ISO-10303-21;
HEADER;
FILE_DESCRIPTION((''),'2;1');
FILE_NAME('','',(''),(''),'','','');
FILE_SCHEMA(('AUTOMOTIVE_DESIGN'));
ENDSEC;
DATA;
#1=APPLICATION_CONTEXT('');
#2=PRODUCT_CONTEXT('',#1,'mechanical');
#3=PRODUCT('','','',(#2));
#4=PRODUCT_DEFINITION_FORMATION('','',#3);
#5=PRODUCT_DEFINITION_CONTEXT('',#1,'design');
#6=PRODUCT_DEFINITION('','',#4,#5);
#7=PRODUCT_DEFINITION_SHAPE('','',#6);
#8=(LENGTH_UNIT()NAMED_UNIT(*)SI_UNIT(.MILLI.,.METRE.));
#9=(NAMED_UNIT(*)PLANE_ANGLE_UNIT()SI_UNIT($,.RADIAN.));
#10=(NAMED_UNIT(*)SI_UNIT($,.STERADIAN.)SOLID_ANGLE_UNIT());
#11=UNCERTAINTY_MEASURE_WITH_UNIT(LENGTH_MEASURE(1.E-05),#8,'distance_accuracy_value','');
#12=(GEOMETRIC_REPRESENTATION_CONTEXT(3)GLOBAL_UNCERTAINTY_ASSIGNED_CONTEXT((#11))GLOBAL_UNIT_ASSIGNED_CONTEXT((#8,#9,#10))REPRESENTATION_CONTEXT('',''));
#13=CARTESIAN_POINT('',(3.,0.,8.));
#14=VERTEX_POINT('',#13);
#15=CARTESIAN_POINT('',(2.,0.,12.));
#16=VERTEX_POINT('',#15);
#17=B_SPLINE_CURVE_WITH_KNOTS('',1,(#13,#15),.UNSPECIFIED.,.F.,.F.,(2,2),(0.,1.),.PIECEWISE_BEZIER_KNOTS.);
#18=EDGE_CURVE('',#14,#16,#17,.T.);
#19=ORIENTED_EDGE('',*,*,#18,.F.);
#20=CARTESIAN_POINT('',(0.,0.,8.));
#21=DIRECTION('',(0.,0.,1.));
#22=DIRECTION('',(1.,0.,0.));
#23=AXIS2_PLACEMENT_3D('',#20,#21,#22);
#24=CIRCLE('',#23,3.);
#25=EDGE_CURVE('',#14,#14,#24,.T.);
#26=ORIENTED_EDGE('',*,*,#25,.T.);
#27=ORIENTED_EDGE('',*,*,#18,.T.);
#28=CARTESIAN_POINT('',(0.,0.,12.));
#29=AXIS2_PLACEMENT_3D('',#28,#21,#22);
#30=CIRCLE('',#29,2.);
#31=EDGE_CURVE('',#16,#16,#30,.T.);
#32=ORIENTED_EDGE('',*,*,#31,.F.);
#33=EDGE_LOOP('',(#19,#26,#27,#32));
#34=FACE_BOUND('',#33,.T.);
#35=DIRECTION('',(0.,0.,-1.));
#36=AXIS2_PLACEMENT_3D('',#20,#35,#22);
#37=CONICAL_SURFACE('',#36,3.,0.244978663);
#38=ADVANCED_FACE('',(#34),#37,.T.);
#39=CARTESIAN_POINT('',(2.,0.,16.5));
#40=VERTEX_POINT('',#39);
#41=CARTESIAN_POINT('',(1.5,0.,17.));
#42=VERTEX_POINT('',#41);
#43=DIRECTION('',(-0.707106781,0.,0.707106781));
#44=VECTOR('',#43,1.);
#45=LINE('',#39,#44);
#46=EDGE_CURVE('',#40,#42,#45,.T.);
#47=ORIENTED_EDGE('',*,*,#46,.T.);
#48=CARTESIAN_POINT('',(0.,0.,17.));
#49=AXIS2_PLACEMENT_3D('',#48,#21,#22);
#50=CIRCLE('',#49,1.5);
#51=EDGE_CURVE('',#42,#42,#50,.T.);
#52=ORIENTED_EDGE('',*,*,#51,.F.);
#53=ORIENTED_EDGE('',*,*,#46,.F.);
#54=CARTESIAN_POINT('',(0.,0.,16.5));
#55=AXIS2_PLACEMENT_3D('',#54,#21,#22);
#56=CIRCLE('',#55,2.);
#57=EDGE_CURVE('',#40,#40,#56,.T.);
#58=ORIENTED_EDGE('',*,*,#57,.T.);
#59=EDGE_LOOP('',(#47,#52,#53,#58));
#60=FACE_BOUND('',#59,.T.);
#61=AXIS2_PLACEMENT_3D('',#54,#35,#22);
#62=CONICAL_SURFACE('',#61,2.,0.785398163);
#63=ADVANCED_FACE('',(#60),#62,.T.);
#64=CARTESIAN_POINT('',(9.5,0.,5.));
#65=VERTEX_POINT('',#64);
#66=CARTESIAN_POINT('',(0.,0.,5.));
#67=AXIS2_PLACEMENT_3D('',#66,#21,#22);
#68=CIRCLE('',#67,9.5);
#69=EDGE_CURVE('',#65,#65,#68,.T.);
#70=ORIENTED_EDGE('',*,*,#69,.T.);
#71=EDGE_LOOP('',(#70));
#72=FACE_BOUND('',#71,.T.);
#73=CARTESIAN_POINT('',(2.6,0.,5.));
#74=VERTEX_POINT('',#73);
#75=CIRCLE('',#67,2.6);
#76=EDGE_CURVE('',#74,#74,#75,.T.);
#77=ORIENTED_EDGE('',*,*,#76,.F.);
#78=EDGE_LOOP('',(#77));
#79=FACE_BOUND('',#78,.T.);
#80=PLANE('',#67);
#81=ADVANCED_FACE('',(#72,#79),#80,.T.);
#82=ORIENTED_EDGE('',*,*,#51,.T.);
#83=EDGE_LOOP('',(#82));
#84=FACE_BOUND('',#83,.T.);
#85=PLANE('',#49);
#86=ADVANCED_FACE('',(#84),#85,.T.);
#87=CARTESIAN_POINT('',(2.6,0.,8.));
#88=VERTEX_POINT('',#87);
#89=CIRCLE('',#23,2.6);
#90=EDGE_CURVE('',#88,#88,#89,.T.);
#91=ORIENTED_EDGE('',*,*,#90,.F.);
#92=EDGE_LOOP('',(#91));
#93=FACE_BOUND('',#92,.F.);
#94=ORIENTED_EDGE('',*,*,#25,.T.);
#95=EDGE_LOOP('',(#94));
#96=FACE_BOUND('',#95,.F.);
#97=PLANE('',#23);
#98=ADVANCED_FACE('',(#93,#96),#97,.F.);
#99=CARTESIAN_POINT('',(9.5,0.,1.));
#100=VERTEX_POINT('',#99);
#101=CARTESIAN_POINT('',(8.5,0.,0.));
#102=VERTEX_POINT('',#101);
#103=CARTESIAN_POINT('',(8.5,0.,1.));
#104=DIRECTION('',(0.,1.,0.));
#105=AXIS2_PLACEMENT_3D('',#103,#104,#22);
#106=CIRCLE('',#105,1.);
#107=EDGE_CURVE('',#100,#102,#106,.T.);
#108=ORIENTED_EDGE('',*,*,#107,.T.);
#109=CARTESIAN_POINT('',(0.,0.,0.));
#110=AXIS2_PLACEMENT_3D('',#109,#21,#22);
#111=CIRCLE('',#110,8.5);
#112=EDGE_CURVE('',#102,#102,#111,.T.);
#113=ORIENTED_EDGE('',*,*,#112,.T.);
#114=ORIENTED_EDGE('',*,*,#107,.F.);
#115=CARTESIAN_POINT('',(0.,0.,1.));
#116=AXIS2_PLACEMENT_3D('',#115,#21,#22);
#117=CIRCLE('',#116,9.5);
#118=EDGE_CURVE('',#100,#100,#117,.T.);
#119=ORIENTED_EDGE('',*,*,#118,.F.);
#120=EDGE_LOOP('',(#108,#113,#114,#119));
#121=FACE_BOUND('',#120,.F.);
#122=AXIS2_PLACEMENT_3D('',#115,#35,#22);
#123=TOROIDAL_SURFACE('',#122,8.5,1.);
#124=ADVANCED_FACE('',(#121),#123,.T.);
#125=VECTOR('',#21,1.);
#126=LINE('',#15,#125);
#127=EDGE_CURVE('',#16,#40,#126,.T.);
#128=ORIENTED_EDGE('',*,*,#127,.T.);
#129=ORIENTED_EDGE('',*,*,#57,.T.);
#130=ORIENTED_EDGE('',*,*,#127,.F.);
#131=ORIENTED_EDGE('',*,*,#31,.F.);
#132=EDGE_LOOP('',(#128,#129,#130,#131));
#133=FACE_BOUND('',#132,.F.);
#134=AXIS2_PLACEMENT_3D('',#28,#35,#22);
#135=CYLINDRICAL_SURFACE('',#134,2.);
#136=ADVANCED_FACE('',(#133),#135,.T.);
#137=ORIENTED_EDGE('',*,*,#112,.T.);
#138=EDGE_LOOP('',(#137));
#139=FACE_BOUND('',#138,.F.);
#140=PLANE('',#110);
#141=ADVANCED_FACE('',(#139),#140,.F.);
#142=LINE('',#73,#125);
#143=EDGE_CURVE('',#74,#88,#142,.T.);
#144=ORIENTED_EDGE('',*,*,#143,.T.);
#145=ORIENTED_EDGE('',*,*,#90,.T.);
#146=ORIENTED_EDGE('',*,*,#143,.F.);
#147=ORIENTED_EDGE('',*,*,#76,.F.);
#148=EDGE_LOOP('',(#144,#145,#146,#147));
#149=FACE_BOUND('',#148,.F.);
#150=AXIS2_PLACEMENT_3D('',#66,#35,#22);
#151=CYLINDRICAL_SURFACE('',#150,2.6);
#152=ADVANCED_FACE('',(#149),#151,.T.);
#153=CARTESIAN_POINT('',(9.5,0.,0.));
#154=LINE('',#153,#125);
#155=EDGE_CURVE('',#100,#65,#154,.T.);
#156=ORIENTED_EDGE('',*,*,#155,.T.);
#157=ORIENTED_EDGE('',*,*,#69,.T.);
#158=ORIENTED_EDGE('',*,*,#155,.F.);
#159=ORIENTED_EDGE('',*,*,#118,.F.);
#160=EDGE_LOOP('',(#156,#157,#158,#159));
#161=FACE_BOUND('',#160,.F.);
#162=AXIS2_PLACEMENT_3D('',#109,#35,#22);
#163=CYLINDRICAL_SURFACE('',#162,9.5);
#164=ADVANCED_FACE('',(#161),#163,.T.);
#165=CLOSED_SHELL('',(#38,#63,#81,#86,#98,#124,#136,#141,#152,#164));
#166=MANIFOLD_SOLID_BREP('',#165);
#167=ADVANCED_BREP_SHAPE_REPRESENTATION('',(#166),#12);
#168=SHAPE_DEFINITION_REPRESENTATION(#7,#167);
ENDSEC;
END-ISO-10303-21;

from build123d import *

# Parameters (mm, degrees)
F0_R      = 9.5
F1_DEPTH  = 5
F2_R      = 1
F4_R      = 3
F6_R      = 2
F8_R      = 2.6
F9_DEPTH  = 3
F10_DEPTH = 5
F11_SIZE  = 0.5


with BuildPart() as f1:
    # F0 (on Top) → F1 (new body)
    with BuildSketch(Plane.XY):
        Circle(F0_R)
    extrude(amount=F1_DEPTH)

    # F2
    f2_edges = [f1.edges().sort_by_distance(p)[0] for p in [
        (-9.5, 0, 0),
    ]]
    fillet(f2_edges, radius=F2_R)



with BuildPart() as f7:
    # F4 (on offset) → F7 section 0
    with BuildSketch(Plane.XY.offset(8)):
        Circle(F4_R)
    # F6 (on offset) → F7 section 1
    with BuildSketch(Plane.XY.offset(12)):
        Circle(F6_R)
    loft()


with BuildPart() as f1_1:
    add(f1.part)

    add(f7.part)  # F9 merges F7
    # F8 (on face) → F9 (join)
    with BuildSketch(Plane.XY.offset(5)):
        Circle(F8_R)
    extrude(amount=F9_DEPTH)

    # F10 (add): a face of the model
    f10_faces = [f1_1.faces().sort_by_distance(p)[0] for p in [
        (0, 0, 12),
    ]]
    extrude(f10_faces, amount=F10_DEPTH)

    # F11
    f11_edges = [f1_1.edges().sort_by_distance(p)[0] for p in [
        (-2, 0, 17),
    ]]
    chamfer(f11_edges, length=F11_SIZE)


solid = f1_1.part
